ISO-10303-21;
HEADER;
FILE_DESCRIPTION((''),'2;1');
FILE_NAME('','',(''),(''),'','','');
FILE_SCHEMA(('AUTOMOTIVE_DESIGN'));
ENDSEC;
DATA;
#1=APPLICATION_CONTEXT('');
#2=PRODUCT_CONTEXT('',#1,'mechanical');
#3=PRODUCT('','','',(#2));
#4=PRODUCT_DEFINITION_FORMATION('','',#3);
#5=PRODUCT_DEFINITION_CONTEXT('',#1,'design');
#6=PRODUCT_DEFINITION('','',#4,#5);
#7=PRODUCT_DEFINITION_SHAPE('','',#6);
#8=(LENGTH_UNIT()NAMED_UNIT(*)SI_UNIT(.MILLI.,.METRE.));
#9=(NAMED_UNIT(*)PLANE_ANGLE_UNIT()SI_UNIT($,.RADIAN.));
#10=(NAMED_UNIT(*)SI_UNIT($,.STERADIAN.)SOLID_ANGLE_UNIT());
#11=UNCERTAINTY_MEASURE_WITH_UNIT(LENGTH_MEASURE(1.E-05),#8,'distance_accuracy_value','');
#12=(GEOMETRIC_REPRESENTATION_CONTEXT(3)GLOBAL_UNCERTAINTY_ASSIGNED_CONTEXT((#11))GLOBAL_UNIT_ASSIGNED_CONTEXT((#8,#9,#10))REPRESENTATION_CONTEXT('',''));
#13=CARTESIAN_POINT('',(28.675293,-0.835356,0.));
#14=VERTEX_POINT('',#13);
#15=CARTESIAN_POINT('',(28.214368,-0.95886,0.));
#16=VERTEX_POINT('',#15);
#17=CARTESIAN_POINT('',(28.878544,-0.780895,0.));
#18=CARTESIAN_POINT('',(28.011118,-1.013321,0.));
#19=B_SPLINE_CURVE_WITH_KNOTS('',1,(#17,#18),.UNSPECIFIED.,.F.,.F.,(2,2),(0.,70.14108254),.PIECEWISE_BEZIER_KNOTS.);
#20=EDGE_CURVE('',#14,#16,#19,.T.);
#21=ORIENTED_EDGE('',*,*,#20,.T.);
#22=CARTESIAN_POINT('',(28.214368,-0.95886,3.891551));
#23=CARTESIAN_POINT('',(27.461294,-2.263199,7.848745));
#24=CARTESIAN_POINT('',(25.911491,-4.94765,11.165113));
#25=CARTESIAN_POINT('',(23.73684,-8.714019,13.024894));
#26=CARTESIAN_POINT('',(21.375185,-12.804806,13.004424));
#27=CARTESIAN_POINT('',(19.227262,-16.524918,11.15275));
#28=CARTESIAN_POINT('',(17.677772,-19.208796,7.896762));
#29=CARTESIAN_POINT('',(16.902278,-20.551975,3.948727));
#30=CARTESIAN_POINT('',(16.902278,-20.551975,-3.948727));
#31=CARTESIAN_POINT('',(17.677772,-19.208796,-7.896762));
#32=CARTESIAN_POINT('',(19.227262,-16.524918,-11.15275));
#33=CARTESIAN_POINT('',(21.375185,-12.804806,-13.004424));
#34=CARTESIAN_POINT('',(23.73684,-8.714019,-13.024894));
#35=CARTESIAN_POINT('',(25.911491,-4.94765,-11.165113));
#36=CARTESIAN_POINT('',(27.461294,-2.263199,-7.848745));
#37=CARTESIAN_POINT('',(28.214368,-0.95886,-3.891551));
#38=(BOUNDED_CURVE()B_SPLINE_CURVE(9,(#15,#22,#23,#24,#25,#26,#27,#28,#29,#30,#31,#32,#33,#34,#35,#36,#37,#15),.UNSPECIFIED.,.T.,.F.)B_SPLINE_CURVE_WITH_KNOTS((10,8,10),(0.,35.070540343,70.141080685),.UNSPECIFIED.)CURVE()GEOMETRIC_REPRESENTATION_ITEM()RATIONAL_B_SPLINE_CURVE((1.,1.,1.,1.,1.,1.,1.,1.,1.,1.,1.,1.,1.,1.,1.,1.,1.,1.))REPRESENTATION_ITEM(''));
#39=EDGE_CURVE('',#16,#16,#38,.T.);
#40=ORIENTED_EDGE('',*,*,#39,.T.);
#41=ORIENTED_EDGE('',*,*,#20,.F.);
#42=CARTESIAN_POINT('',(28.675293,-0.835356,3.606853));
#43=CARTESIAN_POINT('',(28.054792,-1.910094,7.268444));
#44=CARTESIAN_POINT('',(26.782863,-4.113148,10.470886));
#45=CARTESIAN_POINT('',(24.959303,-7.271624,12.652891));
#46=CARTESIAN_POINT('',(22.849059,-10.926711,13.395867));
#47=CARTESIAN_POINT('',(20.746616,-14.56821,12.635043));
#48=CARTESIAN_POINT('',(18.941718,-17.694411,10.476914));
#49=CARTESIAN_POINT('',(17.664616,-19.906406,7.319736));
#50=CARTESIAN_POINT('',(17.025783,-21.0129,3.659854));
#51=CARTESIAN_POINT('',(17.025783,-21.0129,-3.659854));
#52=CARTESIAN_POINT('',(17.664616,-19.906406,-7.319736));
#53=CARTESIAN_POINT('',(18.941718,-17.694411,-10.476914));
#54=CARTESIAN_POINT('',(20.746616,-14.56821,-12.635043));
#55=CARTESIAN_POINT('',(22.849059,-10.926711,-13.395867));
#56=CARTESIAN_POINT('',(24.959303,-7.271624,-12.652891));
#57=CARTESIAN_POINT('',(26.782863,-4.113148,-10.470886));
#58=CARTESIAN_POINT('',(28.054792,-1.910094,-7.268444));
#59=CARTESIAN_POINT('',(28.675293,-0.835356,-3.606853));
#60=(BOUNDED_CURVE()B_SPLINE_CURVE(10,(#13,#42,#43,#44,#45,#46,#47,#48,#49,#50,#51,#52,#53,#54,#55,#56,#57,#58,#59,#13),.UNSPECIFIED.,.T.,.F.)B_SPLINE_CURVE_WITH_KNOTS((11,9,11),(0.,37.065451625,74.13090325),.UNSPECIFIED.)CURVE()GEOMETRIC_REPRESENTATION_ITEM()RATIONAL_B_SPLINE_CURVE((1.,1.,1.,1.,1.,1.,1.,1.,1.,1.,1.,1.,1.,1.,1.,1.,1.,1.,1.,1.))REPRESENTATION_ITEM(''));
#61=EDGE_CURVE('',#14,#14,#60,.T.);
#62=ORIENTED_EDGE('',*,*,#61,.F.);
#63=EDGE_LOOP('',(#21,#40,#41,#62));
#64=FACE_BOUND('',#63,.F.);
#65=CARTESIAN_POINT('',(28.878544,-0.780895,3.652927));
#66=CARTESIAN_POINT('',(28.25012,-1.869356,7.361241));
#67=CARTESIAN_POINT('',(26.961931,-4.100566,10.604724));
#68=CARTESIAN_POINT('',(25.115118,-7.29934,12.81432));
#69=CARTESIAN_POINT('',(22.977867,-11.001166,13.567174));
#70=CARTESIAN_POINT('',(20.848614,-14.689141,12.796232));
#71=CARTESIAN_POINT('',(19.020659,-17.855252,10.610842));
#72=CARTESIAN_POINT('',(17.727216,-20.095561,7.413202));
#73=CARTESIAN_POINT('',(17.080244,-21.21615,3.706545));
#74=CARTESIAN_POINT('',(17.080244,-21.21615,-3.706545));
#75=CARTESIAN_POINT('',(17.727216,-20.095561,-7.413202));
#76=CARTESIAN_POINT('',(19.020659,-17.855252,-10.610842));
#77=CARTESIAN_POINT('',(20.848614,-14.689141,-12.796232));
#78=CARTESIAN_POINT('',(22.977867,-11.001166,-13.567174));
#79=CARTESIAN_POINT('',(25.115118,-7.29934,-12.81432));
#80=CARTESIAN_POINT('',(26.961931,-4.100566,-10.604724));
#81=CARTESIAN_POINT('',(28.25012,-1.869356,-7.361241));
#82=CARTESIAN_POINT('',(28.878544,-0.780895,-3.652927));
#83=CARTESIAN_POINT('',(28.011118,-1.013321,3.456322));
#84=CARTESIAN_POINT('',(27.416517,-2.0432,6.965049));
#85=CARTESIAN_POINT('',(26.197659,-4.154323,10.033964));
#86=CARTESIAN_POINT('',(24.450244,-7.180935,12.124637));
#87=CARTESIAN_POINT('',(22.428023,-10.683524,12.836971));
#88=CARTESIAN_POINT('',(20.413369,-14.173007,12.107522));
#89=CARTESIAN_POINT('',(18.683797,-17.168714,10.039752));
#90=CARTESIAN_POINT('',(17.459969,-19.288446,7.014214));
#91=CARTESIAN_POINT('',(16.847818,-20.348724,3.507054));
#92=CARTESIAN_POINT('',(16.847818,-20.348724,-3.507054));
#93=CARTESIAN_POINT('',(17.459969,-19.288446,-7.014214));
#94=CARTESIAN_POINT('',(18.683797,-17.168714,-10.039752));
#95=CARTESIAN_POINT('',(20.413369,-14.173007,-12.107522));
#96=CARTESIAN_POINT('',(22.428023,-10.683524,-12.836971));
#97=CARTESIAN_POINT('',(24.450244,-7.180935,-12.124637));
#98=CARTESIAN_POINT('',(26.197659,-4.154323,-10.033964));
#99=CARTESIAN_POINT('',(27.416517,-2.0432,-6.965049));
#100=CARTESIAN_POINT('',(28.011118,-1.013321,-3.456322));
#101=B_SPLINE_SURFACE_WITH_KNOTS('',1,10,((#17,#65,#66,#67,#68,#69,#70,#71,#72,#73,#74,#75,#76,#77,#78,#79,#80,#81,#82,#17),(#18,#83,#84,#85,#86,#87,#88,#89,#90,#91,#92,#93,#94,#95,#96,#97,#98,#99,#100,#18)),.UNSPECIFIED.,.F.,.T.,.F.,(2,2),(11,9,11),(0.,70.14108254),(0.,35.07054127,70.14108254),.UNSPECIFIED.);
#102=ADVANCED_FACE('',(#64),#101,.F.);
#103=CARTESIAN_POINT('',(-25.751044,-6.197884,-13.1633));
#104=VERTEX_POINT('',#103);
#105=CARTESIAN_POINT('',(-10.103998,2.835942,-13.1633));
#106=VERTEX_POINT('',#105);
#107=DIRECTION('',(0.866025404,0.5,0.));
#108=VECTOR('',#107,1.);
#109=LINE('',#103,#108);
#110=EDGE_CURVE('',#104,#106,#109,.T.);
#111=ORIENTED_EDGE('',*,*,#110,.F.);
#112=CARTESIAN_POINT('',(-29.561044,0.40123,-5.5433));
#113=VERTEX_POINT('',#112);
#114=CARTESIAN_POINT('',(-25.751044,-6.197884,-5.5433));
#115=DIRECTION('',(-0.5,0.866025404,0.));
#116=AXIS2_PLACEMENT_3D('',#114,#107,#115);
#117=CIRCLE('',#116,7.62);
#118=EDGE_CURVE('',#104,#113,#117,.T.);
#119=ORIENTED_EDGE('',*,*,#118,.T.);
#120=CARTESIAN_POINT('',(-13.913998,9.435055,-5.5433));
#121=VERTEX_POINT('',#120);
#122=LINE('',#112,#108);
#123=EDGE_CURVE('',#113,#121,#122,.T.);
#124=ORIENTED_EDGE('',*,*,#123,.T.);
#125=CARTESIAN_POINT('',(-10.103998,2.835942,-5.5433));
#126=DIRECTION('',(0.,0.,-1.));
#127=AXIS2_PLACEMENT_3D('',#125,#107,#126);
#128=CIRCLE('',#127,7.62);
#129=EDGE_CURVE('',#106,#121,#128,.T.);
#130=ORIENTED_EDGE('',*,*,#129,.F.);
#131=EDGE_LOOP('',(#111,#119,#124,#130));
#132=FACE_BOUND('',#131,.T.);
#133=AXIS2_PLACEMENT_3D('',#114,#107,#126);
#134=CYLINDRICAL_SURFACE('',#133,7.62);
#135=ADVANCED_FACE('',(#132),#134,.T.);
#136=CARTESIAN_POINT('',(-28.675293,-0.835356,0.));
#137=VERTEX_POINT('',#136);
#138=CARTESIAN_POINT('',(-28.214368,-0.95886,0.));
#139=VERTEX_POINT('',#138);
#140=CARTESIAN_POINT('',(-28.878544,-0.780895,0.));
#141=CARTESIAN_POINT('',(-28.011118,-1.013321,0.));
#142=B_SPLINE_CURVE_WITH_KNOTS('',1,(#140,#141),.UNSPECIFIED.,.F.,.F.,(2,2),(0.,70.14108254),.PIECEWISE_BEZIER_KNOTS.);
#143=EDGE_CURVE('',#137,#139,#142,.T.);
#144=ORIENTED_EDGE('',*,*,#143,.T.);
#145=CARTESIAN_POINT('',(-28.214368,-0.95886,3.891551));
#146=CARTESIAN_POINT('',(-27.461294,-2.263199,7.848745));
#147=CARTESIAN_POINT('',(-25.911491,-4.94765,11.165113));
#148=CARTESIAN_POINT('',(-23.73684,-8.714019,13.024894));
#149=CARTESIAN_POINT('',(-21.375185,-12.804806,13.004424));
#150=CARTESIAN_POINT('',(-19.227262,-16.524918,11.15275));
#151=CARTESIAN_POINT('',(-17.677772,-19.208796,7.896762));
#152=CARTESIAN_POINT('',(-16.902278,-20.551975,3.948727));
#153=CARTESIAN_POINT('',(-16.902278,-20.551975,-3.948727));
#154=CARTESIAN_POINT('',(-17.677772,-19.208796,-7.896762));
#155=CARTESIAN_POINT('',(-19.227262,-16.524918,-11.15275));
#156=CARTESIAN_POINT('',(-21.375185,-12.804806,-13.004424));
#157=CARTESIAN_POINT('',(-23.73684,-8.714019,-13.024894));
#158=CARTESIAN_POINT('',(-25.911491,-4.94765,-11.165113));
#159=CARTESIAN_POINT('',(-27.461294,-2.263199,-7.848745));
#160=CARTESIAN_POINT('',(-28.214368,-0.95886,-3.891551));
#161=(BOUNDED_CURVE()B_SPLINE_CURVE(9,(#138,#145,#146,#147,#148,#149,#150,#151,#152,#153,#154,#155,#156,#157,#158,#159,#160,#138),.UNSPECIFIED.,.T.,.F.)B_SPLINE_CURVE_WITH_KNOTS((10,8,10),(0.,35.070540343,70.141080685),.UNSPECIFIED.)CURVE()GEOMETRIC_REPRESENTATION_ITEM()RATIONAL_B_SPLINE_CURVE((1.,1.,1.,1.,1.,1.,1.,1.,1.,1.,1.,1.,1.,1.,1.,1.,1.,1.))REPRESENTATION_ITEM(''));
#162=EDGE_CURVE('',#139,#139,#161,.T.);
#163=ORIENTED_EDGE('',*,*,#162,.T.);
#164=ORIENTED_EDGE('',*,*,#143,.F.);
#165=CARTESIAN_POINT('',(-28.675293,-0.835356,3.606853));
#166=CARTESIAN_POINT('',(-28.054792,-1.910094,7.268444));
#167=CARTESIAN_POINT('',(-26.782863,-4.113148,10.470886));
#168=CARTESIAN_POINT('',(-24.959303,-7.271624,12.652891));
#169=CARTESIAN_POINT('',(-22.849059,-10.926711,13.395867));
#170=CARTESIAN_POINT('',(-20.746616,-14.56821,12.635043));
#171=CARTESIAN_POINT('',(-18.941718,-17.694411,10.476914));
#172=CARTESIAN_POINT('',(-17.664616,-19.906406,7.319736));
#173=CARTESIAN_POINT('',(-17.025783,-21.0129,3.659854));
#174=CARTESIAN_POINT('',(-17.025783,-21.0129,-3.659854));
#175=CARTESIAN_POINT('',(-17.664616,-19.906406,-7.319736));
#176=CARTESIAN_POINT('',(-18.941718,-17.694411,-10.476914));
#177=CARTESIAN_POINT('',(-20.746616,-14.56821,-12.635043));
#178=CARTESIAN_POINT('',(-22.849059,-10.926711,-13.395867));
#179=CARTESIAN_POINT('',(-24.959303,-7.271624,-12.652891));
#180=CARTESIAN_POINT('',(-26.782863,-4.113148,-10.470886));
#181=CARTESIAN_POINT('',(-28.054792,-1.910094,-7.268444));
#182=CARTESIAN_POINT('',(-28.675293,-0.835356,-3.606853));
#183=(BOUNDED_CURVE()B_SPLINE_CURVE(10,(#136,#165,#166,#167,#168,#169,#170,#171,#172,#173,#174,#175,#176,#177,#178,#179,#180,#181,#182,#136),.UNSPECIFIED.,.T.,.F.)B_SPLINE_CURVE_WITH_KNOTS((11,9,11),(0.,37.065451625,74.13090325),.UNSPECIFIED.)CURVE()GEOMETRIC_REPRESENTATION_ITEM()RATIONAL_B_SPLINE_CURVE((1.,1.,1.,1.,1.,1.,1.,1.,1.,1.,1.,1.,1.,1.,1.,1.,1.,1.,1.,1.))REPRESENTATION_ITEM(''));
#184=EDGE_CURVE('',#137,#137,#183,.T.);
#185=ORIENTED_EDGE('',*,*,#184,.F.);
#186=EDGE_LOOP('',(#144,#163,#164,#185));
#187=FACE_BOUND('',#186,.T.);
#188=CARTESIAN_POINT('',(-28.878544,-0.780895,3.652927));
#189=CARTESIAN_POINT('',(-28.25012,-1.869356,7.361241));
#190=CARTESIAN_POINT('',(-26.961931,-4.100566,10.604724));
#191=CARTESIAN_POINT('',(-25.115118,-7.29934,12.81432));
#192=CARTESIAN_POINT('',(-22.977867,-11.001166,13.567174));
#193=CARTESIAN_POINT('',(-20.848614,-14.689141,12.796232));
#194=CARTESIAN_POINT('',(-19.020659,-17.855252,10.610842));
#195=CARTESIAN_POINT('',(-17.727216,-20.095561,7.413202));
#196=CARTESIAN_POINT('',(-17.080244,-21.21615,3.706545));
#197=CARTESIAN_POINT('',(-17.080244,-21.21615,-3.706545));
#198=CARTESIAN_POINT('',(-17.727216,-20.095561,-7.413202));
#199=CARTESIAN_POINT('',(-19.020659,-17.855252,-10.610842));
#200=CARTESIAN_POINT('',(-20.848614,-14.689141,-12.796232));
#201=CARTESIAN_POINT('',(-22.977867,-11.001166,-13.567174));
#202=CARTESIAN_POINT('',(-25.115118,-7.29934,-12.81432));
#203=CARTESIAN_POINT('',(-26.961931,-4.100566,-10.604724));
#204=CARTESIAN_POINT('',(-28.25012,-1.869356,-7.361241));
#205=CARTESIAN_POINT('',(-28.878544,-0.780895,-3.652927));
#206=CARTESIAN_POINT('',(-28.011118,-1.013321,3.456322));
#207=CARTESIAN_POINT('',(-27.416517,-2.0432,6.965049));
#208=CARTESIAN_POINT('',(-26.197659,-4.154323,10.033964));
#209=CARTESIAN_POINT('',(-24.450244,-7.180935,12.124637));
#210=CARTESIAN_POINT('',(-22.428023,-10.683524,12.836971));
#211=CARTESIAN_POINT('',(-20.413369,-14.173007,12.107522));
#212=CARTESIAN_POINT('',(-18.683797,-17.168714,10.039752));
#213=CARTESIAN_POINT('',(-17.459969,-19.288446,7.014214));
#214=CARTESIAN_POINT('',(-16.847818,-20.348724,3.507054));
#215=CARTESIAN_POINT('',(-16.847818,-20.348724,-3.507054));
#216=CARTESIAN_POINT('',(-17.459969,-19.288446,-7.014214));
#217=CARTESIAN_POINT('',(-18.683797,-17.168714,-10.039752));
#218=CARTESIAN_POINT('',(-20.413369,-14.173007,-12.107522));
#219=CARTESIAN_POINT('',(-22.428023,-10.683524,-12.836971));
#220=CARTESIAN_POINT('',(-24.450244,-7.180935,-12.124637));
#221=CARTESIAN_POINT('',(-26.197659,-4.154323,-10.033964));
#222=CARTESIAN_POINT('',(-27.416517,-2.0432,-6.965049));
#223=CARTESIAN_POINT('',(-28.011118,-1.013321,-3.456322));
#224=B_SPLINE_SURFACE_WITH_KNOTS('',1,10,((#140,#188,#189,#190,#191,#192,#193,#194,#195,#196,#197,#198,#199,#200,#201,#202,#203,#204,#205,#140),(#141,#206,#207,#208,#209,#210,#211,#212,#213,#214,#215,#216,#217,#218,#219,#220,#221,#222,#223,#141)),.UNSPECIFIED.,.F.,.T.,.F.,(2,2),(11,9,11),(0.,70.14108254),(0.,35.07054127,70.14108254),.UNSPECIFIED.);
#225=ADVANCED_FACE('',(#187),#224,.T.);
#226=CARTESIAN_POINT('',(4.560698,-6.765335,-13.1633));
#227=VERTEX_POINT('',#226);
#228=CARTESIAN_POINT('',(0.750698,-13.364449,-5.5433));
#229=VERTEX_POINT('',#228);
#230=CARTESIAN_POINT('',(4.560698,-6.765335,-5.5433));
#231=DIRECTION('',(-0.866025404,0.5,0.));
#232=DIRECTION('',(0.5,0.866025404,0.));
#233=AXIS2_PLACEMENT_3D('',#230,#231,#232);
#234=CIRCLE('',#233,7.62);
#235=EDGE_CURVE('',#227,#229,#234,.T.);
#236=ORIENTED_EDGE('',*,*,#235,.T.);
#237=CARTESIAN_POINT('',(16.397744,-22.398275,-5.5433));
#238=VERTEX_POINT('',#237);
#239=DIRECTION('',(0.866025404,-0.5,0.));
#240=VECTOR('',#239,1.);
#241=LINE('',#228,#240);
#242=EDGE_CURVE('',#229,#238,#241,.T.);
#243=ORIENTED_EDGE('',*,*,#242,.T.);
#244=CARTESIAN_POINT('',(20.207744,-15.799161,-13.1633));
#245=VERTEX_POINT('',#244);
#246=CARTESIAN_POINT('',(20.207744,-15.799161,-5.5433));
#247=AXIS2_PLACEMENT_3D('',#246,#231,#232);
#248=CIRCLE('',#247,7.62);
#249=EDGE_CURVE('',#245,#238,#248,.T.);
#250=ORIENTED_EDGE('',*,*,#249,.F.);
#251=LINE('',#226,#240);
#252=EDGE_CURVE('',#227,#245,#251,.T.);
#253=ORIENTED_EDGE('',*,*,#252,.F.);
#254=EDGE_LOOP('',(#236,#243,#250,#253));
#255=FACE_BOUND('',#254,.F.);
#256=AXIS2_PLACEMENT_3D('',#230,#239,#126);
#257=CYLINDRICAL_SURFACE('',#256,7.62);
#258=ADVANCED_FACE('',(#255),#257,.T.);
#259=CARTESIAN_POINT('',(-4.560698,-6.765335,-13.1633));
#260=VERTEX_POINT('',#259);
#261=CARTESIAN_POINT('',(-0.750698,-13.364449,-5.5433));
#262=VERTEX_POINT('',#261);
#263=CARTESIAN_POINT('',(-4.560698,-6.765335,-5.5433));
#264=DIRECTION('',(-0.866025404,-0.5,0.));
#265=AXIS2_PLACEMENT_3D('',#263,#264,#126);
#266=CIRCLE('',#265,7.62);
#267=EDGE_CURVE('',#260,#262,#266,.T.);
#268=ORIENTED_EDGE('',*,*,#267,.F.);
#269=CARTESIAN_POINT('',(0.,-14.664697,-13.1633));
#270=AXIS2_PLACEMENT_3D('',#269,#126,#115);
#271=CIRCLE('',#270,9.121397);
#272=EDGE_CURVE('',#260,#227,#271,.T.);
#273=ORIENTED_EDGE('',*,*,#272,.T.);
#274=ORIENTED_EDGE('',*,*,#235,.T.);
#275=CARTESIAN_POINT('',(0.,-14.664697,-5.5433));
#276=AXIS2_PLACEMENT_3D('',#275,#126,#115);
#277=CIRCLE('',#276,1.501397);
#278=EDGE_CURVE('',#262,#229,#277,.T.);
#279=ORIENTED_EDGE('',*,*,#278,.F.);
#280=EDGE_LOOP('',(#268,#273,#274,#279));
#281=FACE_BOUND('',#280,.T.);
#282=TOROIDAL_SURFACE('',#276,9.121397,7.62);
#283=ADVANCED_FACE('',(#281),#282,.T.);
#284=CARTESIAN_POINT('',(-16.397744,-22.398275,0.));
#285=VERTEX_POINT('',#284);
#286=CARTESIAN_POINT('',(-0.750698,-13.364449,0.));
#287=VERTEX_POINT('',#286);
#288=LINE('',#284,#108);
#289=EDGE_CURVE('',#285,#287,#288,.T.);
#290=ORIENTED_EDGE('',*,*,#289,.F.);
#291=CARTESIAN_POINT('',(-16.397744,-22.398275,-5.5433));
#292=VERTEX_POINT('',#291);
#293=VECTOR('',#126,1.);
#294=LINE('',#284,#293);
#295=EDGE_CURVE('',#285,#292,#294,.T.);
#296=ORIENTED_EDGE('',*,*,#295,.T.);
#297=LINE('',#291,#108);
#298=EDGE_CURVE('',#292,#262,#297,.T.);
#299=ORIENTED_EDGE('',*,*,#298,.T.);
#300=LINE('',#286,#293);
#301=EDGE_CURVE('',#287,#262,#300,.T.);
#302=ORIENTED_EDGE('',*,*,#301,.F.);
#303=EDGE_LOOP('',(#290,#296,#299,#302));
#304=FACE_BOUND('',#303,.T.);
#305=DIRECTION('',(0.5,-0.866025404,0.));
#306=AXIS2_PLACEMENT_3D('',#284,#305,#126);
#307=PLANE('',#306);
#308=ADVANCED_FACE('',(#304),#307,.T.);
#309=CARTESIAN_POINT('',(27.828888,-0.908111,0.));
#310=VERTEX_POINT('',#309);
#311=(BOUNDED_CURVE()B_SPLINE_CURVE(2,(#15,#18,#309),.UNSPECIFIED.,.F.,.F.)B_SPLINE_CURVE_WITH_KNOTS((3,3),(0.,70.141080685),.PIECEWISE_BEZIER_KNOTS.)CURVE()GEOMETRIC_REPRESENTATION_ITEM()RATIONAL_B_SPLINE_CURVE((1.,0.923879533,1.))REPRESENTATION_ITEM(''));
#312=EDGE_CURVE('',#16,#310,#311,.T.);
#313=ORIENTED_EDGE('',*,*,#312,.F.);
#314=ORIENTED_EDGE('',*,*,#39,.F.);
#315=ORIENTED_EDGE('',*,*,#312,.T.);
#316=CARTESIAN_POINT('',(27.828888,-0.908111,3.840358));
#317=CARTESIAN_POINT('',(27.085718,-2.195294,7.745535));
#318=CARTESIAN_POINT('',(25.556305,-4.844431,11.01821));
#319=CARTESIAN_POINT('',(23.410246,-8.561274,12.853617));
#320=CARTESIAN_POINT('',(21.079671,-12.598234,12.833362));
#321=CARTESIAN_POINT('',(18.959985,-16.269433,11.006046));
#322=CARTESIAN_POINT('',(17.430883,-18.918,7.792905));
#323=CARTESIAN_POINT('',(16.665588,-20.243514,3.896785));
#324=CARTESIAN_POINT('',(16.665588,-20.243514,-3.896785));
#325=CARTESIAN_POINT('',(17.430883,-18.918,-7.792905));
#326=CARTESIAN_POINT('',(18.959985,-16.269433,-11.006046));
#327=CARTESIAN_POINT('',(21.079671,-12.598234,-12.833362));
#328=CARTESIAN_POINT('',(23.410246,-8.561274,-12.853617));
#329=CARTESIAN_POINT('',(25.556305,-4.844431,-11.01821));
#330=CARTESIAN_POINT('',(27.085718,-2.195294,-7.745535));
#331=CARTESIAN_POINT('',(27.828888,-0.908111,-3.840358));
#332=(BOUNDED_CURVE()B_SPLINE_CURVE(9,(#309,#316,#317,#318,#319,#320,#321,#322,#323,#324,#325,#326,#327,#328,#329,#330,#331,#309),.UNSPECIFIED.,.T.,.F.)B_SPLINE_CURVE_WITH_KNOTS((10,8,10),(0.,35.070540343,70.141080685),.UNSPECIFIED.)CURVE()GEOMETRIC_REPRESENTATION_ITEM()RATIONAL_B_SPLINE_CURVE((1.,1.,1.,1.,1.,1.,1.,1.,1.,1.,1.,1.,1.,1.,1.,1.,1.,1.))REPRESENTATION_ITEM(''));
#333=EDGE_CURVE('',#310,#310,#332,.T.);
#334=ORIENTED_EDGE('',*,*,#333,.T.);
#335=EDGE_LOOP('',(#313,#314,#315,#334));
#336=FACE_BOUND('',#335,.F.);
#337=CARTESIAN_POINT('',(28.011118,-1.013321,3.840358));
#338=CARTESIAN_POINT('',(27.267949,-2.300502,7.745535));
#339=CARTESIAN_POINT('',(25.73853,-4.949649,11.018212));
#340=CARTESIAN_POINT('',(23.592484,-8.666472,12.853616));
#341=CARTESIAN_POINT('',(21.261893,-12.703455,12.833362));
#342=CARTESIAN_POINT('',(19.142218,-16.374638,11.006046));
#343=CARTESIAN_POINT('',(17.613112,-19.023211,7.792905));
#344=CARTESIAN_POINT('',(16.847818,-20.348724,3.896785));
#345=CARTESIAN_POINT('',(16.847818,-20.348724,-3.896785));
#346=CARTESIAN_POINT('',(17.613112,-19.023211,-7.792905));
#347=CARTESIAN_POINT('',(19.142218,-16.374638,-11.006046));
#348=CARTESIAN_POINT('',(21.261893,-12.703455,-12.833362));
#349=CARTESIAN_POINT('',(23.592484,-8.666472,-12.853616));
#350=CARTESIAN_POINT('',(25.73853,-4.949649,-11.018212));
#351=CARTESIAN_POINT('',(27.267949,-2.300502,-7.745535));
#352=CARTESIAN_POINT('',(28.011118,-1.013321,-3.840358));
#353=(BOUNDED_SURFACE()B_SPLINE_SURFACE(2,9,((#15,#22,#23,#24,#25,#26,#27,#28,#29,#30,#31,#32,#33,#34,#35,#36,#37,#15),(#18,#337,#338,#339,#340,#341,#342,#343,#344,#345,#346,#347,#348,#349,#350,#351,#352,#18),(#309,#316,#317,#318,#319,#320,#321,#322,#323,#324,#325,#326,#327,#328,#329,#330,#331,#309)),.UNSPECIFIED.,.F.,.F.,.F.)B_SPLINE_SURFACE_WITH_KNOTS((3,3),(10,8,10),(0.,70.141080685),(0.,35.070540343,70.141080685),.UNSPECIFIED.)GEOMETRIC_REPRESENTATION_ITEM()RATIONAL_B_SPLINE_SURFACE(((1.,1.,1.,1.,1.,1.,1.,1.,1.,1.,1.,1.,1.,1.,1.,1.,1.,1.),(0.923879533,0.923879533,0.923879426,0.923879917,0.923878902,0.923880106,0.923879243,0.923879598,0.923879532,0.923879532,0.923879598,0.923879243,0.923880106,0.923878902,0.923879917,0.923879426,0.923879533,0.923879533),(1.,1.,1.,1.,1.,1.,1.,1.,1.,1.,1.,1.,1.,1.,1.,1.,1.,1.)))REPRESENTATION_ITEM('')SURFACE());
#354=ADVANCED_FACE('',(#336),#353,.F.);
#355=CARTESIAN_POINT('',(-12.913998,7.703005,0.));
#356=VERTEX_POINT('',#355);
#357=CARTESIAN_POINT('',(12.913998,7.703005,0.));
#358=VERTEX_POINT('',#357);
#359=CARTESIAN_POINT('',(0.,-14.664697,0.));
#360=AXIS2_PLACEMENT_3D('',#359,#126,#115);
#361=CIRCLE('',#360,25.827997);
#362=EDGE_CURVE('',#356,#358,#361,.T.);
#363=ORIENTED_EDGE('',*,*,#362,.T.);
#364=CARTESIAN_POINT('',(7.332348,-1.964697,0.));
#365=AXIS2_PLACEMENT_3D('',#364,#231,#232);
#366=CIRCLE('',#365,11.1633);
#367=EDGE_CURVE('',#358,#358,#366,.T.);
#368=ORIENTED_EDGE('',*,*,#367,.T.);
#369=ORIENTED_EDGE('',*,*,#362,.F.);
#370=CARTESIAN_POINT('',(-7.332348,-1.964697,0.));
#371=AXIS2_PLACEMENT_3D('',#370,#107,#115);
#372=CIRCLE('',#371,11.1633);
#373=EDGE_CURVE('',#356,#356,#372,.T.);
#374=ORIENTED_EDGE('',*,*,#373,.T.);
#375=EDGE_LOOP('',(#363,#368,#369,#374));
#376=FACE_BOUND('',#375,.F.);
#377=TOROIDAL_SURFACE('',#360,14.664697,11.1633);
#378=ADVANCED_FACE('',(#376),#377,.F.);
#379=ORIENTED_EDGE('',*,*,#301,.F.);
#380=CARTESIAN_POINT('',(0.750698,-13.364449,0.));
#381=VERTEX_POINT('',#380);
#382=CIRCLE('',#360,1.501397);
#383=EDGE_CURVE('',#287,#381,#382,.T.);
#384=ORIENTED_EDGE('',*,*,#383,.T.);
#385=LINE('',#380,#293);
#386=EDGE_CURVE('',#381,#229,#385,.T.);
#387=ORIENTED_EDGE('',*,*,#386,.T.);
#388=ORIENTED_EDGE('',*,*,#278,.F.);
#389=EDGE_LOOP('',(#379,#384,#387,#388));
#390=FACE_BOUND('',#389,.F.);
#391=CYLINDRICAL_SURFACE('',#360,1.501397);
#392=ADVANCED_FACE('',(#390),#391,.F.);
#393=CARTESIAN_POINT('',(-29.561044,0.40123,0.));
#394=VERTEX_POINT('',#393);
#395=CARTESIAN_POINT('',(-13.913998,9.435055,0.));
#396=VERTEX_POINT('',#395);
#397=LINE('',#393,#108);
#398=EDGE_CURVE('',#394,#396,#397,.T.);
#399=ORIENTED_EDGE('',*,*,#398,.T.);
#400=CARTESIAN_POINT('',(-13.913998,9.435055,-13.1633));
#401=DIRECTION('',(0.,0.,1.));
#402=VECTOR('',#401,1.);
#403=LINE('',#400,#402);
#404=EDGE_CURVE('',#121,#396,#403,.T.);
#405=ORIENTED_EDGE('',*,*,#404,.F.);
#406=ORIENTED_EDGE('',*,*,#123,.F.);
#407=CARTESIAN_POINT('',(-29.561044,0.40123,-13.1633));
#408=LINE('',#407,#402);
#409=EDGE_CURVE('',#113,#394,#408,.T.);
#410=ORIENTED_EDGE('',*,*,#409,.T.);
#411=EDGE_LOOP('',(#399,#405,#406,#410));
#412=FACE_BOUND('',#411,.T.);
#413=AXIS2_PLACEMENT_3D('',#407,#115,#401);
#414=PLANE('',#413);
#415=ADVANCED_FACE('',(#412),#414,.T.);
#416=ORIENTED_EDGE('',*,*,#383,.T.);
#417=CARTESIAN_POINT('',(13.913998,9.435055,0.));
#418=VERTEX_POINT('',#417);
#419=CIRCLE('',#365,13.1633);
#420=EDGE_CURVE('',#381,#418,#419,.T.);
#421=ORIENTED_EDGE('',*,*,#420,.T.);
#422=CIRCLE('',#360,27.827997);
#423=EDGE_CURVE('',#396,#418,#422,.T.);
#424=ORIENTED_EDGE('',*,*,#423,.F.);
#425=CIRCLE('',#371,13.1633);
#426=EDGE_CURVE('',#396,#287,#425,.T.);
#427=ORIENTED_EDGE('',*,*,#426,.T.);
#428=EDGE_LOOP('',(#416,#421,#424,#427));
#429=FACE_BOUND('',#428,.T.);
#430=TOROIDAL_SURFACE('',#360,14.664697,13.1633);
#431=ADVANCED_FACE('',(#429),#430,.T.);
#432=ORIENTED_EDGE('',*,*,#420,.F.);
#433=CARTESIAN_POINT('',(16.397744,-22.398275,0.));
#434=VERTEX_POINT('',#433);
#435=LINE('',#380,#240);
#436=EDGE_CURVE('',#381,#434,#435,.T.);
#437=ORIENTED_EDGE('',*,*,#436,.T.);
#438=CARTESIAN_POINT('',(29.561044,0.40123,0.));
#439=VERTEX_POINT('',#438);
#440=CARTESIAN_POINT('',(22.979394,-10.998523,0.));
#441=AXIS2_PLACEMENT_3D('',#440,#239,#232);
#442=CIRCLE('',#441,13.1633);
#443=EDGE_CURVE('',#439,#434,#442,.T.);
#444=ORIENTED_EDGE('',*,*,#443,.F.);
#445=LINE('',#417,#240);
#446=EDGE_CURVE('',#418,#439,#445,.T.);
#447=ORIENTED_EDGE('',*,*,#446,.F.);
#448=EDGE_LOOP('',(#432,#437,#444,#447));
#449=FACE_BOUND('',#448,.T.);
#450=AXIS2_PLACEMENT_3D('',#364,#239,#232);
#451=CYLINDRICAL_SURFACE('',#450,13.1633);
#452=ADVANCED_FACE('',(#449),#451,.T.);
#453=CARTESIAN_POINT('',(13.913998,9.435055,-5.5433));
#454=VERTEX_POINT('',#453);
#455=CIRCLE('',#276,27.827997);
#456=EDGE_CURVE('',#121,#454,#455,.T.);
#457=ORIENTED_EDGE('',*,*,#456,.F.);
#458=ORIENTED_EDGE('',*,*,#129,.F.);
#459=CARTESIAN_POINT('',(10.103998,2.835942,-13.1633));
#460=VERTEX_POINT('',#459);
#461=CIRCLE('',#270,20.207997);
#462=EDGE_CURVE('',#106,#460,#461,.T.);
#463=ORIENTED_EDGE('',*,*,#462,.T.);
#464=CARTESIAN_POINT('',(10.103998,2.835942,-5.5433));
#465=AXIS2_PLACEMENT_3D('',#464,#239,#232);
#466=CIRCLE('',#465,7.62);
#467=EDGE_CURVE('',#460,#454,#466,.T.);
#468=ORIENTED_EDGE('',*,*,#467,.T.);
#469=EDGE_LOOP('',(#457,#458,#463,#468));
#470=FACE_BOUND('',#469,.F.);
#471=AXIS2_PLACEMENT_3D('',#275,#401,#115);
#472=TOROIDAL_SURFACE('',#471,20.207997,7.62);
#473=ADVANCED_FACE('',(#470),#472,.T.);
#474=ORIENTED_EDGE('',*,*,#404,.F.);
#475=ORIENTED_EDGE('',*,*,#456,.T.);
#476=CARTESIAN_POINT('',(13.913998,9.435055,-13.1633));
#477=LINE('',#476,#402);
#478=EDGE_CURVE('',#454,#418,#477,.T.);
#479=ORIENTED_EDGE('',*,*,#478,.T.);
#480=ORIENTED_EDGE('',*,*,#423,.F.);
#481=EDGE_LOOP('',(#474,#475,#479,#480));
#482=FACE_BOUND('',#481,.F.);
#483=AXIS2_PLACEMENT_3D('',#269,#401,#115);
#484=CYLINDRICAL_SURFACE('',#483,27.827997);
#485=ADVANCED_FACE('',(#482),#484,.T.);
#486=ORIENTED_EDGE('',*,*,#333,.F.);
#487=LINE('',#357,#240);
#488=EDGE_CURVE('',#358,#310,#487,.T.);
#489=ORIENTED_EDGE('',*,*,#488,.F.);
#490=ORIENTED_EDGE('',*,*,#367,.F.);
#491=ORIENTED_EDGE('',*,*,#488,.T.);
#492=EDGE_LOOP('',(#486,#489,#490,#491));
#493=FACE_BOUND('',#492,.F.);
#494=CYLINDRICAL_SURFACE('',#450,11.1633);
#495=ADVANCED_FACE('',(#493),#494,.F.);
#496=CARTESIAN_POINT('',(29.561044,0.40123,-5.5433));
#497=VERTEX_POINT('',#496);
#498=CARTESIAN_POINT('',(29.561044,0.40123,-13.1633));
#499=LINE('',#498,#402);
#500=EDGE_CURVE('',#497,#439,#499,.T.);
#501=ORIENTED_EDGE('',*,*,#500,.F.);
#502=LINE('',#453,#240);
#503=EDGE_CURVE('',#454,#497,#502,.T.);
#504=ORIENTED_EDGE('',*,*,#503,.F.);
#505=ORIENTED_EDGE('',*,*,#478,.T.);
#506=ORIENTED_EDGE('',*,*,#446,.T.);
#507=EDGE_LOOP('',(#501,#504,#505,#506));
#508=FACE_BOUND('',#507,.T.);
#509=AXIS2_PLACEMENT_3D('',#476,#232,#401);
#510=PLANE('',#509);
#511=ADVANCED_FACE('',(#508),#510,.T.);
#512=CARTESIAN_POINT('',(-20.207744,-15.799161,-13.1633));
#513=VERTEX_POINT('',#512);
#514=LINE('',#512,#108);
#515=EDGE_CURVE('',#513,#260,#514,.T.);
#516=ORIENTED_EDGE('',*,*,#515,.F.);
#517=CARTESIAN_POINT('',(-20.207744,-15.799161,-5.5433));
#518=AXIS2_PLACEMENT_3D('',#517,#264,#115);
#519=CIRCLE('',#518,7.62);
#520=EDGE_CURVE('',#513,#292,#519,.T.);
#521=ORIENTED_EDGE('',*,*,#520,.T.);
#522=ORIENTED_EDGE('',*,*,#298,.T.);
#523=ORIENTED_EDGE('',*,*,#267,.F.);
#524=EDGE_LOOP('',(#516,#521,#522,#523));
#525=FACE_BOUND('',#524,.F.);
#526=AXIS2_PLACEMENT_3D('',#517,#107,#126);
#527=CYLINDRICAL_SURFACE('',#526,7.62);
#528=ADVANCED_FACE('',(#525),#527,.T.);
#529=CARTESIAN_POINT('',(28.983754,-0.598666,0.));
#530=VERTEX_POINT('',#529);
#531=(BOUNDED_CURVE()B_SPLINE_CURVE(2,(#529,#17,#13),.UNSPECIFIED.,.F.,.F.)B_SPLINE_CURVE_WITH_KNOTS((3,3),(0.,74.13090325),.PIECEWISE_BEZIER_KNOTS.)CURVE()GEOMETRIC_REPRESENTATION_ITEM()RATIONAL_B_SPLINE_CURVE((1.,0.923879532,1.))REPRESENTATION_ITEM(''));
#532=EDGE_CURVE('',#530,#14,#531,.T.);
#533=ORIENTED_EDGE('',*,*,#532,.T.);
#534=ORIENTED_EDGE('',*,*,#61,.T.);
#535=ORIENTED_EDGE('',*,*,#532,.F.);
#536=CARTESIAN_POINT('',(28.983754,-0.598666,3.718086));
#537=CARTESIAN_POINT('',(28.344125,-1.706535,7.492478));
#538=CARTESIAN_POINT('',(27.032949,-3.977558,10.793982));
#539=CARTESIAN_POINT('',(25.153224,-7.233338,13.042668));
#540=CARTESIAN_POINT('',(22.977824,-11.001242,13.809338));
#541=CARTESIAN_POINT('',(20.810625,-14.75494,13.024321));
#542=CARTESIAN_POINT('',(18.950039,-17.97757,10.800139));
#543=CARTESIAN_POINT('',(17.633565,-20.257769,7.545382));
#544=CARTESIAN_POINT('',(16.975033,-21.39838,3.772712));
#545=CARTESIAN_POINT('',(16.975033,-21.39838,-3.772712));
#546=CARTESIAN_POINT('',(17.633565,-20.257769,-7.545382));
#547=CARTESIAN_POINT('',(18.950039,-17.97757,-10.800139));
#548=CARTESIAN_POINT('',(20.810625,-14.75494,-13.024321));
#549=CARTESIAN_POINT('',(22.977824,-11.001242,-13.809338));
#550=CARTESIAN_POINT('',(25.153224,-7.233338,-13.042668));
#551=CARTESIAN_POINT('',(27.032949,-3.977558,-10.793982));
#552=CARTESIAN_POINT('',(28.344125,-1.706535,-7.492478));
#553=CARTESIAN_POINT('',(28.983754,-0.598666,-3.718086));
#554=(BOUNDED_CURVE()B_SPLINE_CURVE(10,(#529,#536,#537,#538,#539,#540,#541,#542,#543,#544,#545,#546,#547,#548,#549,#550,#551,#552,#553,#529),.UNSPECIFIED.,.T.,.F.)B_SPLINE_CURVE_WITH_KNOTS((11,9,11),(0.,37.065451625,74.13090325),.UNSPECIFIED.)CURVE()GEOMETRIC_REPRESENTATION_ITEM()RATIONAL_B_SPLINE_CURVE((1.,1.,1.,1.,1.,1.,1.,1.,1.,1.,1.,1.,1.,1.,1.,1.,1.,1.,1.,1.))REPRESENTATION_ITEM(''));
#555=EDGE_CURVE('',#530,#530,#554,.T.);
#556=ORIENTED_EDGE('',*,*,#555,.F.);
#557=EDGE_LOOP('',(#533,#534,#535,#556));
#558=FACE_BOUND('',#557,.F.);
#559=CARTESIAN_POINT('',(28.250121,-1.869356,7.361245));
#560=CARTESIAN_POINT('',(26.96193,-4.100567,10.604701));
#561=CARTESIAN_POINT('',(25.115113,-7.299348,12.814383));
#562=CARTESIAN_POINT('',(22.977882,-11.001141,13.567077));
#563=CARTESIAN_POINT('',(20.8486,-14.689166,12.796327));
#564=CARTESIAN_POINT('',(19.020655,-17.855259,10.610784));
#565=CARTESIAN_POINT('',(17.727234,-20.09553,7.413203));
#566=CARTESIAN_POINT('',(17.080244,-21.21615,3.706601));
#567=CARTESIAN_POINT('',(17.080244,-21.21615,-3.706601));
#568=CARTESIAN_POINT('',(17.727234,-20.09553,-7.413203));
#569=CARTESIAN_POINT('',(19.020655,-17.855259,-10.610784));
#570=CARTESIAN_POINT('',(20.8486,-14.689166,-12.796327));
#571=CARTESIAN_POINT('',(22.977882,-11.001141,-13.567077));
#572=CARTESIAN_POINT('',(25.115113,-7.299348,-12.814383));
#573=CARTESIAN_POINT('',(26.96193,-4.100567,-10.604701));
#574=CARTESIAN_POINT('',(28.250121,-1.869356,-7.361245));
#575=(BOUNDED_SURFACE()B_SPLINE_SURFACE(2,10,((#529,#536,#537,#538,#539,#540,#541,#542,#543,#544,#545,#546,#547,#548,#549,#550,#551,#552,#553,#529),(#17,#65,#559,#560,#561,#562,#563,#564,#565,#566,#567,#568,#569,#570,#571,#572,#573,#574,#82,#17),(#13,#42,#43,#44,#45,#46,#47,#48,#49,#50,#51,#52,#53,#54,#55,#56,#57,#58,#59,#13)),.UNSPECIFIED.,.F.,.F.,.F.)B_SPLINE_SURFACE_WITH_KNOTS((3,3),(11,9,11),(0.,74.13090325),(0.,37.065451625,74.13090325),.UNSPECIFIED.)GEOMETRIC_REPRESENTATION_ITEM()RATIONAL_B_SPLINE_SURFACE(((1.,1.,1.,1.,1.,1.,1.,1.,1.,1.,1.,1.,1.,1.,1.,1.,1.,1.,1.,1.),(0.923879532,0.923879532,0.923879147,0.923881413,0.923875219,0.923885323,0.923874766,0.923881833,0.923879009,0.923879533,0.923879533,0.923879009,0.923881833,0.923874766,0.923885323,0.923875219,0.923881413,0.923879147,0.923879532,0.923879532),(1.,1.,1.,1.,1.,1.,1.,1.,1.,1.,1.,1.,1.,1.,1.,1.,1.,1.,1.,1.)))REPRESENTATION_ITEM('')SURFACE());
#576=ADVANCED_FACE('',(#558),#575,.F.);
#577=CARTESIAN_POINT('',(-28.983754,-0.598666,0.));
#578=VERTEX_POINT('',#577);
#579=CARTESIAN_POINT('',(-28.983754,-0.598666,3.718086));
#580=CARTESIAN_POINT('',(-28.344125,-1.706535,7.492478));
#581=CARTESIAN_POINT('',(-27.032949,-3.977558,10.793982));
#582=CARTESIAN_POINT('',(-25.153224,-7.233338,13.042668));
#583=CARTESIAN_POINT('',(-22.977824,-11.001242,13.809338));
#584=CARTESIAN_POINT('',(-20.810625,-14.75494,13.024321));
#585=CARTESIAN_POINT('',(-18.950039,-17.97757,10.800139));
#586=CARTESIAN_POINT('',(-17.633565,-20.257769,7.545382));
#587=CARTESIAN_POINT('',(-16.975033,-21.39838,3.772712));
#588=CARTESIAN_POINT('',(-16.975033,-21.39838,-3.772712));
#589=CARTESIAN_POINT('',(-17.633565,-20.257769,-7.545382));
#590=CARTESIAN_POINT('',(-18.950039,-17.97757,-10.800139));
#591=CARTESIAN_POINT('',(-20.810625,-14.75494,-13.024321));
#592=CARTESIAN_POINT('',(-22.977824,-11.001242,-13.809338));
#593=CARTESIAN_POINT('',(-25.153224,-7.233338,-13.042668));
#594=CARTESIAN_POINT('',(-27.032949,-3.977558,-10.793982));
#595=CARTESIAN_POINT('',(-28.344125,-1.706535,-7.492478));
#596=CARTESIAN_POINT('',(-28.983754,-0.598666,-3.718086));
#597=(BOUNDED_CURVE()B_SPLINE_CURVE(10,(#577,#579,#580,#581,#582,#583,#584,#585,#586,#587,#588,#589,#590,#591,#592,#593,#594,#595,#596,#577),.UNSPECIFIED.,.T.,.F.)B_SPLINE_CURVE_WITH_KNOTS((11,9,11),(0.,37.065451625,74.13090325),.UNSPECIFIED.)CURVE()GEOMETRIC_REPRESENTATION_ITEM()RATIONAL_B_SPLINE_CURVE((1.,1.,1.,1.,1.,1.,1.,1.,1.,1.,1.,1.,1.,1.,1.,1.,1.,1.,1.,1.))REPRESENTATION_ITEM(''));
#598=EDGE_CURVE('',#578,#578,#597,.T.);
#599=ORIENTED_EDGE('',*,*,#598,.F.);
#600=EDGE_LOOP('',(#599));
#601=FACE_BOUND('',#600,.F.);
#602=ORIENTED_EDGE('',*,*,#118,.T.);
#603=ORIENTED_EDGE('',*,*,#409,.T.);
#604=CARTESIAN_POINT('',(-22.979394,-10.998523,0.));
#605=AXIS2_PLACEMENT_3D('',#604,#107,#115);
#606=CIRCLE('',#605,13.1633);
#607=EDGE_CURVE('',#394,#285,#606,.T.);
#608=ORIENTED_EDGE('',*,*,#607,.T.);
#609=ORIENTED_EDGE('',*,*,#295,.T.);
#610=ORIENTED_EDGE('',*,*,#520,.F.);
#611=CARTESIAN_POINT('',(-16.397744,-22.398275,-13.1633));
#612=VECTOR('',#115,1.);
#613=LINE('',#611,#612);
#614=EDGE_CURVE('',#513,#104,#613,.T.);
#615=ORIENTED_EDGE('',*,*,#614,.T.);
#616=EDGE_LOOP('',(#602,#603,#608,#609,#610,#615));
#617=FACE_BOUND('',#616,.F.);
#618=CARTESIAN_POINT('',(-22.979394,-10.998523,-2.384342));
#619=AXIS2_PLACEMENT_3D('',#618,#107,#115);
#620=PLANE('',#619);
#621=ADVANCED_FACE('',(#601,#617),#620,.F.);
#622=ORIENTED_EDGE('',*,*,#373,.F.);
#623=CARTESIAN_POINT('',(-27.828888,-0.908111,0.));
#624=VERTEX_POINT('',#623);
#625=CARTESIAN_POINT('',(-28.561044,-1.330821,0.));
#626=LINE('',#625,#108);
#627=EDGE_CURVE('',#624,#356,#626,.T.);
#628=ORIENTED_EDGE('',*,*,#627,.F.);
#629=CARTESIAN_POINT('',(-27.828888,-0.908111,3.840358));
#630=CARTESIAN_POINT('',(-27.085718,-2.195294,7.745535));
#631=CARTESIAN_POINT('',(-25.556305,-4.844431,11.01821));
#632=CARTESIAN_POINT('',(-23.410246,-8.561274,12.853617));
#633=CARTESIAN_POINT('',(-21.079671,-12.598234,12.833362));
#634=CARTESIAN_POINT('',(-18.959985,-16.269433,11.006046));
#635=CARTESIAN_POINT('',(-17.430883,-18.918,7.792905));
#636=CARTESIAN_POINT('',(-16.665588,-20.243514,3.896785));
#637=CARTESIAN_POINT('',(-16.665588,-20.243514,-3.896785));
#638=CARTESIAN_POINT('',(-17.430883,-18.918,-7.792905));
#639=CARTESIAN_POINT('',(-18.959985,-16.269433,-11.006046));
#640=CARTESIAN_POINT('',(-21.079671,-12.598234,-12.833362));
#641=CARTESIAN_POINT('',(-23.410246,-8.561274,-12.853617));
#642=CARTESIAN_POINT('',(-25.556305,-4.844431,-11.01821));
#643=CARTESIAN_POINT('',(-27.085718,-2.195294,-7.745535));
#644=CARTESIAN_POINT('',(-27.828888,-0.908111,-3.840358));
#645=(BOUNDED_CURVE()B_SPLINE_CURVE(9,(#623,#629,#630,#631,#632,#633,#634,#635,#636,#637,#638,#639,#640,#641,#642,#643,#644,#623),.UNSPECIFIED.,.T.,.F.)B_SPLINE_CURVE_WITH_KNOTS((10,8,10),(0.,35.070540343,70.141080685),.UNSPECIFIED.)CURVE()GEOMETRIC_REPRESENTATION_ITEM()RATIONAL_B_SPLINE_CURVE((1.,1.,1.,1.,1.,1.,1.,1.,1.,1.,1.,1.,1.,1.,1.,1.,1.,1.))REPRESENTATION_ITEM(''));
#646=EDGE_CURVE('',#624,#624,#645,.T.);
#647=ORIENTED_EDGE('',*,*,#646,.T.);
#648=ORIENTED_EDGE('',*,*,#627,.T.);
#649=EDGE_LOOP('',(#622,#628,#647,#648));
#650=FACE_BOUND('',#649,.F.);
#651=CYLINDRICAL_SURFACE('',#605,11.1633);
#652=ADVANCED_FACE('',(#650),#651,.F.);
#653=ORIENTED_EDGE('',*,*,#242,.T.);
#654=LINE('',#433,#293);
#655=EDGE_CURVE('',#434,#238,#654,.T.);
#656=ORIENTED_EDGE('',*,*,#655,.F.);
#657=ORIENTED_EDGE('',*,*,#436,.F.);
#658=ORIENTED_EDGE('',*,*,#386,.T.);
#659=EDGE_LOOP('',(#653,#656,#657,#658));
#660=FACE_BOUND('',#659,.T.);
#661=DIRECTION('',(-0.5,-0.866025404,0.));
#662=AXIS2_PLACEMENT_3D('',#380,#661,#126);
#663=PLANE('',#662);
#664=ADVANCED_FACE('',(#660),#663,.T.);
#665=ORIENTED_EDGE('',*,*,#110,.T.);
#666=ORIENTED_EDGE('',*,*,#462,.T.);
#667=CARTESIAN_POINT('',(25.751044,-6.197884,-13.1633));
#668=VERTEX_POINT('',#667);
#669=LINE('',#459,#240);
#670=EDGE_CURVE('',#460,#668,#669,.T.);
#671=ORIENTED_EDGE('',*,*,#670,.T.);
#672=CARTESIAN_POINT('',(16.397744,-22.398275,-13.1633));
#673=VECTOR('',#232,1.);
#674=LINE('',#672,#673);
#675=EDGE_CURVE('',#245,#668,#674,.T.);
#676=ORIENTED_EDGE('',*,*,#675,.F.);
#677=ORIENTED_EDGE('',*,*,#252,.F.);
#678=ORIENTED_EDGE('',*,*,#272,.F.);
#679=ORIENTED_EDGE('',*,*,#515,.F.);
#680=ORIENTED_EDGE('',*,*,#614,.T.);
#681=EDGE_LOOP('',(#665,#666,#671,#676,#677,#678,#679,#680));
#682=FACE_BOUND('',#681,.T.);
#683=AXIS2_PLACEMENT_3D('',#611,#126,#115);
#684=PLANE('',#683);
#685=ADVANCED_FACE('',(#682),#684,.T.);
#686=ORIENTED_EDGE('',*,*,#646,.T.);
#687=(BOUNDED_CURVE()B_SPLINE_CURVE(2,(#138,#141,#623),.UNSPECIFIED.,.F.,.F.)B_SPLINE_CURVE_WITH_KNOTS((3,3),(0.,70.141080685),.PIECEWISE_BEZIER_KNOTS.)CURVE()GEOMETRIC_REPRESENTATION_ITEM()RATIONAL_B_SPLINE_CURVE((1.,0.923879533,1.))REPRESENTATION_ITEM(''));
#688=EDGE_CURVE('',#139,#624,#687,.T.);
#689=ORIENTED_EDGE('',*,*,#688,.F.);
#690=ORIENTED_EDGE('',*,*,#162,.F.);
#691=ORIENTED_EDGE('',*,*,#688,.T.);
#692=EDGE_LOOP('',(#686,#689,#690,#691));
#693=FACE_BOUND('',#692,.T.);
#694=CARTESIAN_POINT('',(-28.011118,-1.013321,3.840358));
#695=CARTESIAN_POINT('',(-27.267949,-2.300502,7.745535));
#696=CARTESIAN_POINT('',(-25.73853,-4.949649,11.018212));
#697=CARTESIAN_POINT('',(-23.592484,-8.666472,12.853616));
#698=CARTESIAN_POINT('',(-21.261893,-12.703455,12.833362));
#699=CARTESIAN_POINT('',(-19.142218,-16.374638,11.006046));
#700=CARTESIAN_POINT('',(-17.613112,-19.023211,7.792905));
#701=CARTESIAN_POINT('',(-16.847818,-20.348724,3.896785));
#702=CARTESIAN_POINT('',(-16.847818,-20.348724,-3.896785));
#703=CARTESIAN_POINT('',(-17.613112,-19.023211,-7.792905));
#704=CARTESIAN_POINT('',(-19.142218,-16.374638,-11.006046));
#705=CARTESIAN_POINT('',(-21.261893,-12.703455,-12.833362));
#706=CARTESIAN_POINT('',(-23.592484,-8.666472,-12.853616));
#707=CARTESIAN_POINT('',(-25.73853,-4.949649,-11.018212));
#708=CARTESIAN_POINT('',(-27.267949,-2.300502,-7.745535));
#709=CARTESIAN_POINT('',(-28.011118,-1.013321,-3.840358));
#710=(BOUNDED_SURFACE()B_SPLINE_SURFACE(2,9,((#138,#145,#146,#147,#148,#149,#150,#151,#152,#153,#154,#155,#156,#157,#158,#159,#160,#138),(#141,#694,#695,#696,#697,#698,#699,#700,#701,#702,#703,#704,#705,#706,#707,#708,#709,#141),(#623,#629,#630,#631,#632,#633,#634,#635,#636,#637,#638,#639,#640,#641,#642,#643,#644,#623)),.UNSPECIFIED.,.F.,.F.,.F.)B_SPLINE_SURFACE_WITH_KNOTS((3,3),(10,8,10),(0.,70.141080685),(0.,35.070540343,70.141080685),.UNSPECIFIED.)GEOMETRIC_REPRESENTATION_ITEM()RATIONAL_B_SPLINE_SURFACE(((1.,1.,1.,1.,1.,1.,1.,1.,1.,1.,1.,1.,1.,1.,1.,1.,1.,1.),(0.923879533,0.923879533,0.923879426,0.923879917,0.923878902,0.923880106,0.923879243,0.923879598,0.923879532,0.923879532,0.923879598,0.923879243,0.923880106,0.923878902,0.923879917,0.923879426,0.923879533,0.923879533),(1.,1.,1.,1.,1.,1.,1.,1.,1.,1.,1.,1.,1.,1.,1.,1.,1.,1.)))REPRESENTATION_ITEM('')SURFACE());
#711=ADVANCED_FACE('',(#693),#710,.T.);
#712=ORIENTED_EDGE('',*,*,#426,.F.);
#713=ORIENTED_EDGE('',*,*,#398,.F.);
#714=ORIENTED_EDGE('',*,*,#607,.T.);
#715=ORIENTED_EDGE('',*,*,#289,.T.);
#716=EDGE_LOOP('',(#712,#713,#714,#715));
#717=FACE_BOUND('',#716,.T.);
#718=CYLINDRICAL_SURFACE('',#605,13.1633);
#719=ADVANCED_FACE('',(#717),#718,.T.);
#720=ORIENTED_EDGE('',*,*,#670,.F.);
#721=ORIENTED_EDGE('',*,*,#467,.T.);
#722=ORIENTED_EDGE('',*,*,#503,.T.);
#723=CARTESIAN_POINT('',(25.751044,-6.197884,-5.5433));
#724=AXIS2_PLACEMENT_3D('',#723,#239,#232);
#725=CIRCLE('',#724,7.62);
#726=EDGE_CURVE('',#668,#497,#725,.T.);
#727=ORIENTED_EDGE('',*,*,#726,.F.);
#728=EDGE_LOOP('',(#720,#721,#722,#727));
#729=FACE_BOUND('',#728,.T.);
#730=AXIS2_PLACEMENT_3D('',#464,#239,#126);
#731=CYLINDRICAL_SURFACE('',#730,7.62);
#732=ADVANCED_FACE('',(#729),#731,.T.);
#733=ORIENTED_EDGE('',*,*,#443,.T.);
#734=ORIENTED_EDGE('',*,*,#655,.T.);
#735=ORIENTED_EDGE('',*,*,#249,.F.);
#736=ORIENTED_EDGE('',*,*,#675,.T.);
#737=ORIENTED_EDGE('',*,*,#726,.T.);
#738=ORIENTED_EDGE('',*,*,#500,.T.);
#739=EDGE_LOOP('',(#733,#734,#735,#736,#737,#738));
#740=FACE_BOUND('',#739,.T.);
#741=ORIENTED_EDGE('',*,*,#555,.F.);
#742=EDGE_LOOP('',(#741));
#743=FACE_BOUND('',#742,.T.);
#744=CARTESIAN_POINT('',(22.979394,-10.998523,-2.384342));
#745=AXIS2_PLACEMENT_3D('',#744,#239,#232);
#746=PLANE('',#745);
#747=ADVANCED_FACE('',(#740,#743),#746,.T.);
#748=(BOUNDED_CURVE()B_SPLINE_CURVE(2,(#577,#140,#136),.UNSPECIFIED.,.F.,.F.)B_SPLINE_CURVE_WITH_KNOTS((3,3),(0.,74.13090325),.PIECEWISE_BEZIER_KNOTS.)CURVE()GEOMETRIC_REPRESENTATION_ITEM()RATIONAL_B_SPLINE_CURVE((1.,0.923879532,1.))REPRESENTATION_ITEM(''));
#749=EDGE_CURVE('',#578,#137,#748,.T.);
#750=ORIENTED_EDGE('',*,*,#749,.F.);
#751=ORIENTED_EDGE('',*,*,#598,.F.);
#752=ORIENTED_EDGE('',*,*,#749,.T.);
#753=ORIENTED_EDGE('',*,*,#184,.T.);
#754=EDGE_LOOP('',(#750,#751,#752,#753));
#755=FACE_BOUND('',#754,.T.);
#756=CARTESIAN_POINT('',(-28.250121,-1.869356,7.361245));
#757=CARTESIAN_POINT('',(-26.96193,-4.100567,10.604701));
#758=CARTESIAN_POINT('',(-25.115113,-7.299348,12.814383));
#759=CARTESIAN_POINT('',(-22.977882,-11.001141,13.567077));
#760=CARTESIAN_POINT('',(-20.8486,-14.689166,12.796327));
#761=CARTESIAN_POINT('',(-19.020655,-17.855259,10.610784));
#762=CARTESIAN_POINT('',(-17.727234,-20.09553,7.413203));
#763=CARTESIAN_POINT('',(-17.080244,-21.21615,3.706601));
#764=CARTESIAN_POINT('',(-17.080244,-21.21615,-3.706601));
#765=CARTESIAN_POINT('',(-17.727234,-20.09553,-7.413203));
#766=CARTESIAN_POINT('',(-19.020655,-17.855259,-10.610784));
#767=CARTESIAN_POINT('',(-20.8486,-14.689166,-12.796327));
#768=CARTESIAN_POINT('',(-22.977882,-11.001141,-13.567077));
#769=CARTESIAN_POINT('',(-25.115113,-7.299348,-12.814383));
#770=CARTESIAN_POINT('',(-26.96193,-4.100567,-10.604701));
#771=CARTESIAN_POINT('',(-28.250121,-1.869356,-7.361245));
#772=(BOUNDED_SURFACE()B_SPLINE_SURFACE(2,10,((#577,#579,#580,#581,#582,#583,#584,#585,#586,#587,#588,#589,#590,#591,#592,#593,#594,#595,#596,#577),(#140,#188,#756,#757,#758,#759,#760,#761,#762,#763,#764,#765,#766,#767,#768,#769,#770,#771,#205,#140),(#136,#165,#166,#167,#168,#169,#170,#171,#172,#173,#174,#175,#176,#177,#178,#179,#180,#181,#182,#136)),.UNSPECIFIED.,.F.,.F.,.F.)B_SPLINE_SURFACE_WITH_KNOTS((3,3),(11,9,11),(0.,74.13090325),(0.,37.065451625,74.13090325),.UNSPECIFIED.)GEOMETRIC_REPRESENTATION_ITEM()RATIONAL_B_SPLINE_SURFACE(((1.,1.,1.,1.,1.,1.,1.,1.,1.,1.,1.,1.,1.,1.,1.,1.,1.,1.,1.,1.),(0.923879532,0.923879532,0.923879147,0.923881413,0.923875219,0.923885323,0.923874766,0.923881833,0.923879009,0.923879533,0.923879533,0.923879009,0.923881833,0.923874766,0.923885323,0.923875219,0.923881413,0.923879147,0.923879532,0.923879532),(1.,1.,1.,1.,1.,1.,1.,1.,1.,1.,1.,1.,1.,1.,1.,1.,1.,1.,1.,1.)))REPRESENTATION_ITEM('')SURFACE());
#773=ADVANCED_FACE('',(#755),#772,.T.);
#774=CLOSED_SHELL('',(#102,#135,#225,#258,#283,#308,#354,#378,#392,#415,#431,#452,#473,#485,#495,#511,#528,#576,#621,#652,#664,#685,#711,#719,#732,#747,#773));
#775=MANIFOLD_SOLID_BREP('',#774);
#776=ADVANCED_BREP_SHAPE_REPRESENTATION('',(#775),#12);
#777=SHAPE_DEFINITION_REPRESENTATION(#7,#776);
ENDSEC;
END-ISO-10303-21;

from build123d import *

# Parameters (mm, degrees)
F1_R    = 11.1633
F3_R    = 7.62
F4_SIZE = 0.635
F5_R    = 0.508


with BuildPart() as f2:
    # F2: sweep along a path in F0
    with BuildLine(Plane.XY) as f2_path:
        Line((-21.9970452561, -12.7), (-6.35, -3.6661742094))
        ThreePointArc((-6.35, -3.6661742094), (0, -1.9646968374), (6.35, -3.6661742094))
        Line((6.35, -3.6661742094), (21.9970452561, -12.7))
    # F1 (on Right) → F2 (sweep)
    with BuildSketch(Plane.YZ):
        with BuildLine():
            ThreePointArc((0, -13.1633), (9.3078586928, -9.3078586928), (13.1633, 0))
            ThreePointArc((13.1633, 0), (0, 13.1633), (-13.1633, 0))
            ThreePointArc((-13.1633, 0), (-9.3078586928, -9.3078586928), (0, -13.1633))
        make_face()
        Circle(F1_R, mode=Mode.SUBTRACT)
        with BuildLine():
            Line((13.1633, -13.1633), (13.1633, 0))
            ThreePointArc((13.1633, 0), (9.3078586928, -9.3078586928), (0, -13.1633))
            Line((0, -13.1633), (13.1633, -13.1633))
        make_face()
        with BuildLine():
            ThreePointArc((0, -13.1633), (-9.3078586928, -9.3078586928), (-13.1633, 0))
            Line((-13.1633, 0), (-13.1633, -13.1633))
            Line((-13.1633, -13.1633), (0, -13.1633))
        make_face()
    sweep(path=f2_path.line)

    # F3
    f3_edges = [f2.edges().sort_by_distance(p)[0] for p in [
        (-8.574221, -17.881362, -13.1633),
        (8.574221, -17.881362, -13.1633),
        (0, -13.1633, -13.1633),
        (21.737521, 4.918142, -13.1633),
        (0, 13.1633, -13.1633),
        (-21.737521, 4.918142, -13.1633),
    ]]
    fillet(f3_edges, radius=F3_R)

    # F4
    f4_edges = [f2.edges().sort_by_distance(p)[0] for p in [
        (17.397744, -20.666224, 0),
        (-17.397744, -20.666224, 0),
    ]]
    chamfer(f4_edges, length=F4_SIZE)

    # F5
    f5_edges = [f2.edges().sort_by_distance(p)[0] for p in [
        (-17.080244, -21.21615, 0),
        (-16.847818, -20.348724, 0),
        (17.080244, -21.21615, 0),
        (16.847818, -20.348724, 0),
    ]]
    fillet(f5_edges, radius=F5_R)


solid = f2.part
